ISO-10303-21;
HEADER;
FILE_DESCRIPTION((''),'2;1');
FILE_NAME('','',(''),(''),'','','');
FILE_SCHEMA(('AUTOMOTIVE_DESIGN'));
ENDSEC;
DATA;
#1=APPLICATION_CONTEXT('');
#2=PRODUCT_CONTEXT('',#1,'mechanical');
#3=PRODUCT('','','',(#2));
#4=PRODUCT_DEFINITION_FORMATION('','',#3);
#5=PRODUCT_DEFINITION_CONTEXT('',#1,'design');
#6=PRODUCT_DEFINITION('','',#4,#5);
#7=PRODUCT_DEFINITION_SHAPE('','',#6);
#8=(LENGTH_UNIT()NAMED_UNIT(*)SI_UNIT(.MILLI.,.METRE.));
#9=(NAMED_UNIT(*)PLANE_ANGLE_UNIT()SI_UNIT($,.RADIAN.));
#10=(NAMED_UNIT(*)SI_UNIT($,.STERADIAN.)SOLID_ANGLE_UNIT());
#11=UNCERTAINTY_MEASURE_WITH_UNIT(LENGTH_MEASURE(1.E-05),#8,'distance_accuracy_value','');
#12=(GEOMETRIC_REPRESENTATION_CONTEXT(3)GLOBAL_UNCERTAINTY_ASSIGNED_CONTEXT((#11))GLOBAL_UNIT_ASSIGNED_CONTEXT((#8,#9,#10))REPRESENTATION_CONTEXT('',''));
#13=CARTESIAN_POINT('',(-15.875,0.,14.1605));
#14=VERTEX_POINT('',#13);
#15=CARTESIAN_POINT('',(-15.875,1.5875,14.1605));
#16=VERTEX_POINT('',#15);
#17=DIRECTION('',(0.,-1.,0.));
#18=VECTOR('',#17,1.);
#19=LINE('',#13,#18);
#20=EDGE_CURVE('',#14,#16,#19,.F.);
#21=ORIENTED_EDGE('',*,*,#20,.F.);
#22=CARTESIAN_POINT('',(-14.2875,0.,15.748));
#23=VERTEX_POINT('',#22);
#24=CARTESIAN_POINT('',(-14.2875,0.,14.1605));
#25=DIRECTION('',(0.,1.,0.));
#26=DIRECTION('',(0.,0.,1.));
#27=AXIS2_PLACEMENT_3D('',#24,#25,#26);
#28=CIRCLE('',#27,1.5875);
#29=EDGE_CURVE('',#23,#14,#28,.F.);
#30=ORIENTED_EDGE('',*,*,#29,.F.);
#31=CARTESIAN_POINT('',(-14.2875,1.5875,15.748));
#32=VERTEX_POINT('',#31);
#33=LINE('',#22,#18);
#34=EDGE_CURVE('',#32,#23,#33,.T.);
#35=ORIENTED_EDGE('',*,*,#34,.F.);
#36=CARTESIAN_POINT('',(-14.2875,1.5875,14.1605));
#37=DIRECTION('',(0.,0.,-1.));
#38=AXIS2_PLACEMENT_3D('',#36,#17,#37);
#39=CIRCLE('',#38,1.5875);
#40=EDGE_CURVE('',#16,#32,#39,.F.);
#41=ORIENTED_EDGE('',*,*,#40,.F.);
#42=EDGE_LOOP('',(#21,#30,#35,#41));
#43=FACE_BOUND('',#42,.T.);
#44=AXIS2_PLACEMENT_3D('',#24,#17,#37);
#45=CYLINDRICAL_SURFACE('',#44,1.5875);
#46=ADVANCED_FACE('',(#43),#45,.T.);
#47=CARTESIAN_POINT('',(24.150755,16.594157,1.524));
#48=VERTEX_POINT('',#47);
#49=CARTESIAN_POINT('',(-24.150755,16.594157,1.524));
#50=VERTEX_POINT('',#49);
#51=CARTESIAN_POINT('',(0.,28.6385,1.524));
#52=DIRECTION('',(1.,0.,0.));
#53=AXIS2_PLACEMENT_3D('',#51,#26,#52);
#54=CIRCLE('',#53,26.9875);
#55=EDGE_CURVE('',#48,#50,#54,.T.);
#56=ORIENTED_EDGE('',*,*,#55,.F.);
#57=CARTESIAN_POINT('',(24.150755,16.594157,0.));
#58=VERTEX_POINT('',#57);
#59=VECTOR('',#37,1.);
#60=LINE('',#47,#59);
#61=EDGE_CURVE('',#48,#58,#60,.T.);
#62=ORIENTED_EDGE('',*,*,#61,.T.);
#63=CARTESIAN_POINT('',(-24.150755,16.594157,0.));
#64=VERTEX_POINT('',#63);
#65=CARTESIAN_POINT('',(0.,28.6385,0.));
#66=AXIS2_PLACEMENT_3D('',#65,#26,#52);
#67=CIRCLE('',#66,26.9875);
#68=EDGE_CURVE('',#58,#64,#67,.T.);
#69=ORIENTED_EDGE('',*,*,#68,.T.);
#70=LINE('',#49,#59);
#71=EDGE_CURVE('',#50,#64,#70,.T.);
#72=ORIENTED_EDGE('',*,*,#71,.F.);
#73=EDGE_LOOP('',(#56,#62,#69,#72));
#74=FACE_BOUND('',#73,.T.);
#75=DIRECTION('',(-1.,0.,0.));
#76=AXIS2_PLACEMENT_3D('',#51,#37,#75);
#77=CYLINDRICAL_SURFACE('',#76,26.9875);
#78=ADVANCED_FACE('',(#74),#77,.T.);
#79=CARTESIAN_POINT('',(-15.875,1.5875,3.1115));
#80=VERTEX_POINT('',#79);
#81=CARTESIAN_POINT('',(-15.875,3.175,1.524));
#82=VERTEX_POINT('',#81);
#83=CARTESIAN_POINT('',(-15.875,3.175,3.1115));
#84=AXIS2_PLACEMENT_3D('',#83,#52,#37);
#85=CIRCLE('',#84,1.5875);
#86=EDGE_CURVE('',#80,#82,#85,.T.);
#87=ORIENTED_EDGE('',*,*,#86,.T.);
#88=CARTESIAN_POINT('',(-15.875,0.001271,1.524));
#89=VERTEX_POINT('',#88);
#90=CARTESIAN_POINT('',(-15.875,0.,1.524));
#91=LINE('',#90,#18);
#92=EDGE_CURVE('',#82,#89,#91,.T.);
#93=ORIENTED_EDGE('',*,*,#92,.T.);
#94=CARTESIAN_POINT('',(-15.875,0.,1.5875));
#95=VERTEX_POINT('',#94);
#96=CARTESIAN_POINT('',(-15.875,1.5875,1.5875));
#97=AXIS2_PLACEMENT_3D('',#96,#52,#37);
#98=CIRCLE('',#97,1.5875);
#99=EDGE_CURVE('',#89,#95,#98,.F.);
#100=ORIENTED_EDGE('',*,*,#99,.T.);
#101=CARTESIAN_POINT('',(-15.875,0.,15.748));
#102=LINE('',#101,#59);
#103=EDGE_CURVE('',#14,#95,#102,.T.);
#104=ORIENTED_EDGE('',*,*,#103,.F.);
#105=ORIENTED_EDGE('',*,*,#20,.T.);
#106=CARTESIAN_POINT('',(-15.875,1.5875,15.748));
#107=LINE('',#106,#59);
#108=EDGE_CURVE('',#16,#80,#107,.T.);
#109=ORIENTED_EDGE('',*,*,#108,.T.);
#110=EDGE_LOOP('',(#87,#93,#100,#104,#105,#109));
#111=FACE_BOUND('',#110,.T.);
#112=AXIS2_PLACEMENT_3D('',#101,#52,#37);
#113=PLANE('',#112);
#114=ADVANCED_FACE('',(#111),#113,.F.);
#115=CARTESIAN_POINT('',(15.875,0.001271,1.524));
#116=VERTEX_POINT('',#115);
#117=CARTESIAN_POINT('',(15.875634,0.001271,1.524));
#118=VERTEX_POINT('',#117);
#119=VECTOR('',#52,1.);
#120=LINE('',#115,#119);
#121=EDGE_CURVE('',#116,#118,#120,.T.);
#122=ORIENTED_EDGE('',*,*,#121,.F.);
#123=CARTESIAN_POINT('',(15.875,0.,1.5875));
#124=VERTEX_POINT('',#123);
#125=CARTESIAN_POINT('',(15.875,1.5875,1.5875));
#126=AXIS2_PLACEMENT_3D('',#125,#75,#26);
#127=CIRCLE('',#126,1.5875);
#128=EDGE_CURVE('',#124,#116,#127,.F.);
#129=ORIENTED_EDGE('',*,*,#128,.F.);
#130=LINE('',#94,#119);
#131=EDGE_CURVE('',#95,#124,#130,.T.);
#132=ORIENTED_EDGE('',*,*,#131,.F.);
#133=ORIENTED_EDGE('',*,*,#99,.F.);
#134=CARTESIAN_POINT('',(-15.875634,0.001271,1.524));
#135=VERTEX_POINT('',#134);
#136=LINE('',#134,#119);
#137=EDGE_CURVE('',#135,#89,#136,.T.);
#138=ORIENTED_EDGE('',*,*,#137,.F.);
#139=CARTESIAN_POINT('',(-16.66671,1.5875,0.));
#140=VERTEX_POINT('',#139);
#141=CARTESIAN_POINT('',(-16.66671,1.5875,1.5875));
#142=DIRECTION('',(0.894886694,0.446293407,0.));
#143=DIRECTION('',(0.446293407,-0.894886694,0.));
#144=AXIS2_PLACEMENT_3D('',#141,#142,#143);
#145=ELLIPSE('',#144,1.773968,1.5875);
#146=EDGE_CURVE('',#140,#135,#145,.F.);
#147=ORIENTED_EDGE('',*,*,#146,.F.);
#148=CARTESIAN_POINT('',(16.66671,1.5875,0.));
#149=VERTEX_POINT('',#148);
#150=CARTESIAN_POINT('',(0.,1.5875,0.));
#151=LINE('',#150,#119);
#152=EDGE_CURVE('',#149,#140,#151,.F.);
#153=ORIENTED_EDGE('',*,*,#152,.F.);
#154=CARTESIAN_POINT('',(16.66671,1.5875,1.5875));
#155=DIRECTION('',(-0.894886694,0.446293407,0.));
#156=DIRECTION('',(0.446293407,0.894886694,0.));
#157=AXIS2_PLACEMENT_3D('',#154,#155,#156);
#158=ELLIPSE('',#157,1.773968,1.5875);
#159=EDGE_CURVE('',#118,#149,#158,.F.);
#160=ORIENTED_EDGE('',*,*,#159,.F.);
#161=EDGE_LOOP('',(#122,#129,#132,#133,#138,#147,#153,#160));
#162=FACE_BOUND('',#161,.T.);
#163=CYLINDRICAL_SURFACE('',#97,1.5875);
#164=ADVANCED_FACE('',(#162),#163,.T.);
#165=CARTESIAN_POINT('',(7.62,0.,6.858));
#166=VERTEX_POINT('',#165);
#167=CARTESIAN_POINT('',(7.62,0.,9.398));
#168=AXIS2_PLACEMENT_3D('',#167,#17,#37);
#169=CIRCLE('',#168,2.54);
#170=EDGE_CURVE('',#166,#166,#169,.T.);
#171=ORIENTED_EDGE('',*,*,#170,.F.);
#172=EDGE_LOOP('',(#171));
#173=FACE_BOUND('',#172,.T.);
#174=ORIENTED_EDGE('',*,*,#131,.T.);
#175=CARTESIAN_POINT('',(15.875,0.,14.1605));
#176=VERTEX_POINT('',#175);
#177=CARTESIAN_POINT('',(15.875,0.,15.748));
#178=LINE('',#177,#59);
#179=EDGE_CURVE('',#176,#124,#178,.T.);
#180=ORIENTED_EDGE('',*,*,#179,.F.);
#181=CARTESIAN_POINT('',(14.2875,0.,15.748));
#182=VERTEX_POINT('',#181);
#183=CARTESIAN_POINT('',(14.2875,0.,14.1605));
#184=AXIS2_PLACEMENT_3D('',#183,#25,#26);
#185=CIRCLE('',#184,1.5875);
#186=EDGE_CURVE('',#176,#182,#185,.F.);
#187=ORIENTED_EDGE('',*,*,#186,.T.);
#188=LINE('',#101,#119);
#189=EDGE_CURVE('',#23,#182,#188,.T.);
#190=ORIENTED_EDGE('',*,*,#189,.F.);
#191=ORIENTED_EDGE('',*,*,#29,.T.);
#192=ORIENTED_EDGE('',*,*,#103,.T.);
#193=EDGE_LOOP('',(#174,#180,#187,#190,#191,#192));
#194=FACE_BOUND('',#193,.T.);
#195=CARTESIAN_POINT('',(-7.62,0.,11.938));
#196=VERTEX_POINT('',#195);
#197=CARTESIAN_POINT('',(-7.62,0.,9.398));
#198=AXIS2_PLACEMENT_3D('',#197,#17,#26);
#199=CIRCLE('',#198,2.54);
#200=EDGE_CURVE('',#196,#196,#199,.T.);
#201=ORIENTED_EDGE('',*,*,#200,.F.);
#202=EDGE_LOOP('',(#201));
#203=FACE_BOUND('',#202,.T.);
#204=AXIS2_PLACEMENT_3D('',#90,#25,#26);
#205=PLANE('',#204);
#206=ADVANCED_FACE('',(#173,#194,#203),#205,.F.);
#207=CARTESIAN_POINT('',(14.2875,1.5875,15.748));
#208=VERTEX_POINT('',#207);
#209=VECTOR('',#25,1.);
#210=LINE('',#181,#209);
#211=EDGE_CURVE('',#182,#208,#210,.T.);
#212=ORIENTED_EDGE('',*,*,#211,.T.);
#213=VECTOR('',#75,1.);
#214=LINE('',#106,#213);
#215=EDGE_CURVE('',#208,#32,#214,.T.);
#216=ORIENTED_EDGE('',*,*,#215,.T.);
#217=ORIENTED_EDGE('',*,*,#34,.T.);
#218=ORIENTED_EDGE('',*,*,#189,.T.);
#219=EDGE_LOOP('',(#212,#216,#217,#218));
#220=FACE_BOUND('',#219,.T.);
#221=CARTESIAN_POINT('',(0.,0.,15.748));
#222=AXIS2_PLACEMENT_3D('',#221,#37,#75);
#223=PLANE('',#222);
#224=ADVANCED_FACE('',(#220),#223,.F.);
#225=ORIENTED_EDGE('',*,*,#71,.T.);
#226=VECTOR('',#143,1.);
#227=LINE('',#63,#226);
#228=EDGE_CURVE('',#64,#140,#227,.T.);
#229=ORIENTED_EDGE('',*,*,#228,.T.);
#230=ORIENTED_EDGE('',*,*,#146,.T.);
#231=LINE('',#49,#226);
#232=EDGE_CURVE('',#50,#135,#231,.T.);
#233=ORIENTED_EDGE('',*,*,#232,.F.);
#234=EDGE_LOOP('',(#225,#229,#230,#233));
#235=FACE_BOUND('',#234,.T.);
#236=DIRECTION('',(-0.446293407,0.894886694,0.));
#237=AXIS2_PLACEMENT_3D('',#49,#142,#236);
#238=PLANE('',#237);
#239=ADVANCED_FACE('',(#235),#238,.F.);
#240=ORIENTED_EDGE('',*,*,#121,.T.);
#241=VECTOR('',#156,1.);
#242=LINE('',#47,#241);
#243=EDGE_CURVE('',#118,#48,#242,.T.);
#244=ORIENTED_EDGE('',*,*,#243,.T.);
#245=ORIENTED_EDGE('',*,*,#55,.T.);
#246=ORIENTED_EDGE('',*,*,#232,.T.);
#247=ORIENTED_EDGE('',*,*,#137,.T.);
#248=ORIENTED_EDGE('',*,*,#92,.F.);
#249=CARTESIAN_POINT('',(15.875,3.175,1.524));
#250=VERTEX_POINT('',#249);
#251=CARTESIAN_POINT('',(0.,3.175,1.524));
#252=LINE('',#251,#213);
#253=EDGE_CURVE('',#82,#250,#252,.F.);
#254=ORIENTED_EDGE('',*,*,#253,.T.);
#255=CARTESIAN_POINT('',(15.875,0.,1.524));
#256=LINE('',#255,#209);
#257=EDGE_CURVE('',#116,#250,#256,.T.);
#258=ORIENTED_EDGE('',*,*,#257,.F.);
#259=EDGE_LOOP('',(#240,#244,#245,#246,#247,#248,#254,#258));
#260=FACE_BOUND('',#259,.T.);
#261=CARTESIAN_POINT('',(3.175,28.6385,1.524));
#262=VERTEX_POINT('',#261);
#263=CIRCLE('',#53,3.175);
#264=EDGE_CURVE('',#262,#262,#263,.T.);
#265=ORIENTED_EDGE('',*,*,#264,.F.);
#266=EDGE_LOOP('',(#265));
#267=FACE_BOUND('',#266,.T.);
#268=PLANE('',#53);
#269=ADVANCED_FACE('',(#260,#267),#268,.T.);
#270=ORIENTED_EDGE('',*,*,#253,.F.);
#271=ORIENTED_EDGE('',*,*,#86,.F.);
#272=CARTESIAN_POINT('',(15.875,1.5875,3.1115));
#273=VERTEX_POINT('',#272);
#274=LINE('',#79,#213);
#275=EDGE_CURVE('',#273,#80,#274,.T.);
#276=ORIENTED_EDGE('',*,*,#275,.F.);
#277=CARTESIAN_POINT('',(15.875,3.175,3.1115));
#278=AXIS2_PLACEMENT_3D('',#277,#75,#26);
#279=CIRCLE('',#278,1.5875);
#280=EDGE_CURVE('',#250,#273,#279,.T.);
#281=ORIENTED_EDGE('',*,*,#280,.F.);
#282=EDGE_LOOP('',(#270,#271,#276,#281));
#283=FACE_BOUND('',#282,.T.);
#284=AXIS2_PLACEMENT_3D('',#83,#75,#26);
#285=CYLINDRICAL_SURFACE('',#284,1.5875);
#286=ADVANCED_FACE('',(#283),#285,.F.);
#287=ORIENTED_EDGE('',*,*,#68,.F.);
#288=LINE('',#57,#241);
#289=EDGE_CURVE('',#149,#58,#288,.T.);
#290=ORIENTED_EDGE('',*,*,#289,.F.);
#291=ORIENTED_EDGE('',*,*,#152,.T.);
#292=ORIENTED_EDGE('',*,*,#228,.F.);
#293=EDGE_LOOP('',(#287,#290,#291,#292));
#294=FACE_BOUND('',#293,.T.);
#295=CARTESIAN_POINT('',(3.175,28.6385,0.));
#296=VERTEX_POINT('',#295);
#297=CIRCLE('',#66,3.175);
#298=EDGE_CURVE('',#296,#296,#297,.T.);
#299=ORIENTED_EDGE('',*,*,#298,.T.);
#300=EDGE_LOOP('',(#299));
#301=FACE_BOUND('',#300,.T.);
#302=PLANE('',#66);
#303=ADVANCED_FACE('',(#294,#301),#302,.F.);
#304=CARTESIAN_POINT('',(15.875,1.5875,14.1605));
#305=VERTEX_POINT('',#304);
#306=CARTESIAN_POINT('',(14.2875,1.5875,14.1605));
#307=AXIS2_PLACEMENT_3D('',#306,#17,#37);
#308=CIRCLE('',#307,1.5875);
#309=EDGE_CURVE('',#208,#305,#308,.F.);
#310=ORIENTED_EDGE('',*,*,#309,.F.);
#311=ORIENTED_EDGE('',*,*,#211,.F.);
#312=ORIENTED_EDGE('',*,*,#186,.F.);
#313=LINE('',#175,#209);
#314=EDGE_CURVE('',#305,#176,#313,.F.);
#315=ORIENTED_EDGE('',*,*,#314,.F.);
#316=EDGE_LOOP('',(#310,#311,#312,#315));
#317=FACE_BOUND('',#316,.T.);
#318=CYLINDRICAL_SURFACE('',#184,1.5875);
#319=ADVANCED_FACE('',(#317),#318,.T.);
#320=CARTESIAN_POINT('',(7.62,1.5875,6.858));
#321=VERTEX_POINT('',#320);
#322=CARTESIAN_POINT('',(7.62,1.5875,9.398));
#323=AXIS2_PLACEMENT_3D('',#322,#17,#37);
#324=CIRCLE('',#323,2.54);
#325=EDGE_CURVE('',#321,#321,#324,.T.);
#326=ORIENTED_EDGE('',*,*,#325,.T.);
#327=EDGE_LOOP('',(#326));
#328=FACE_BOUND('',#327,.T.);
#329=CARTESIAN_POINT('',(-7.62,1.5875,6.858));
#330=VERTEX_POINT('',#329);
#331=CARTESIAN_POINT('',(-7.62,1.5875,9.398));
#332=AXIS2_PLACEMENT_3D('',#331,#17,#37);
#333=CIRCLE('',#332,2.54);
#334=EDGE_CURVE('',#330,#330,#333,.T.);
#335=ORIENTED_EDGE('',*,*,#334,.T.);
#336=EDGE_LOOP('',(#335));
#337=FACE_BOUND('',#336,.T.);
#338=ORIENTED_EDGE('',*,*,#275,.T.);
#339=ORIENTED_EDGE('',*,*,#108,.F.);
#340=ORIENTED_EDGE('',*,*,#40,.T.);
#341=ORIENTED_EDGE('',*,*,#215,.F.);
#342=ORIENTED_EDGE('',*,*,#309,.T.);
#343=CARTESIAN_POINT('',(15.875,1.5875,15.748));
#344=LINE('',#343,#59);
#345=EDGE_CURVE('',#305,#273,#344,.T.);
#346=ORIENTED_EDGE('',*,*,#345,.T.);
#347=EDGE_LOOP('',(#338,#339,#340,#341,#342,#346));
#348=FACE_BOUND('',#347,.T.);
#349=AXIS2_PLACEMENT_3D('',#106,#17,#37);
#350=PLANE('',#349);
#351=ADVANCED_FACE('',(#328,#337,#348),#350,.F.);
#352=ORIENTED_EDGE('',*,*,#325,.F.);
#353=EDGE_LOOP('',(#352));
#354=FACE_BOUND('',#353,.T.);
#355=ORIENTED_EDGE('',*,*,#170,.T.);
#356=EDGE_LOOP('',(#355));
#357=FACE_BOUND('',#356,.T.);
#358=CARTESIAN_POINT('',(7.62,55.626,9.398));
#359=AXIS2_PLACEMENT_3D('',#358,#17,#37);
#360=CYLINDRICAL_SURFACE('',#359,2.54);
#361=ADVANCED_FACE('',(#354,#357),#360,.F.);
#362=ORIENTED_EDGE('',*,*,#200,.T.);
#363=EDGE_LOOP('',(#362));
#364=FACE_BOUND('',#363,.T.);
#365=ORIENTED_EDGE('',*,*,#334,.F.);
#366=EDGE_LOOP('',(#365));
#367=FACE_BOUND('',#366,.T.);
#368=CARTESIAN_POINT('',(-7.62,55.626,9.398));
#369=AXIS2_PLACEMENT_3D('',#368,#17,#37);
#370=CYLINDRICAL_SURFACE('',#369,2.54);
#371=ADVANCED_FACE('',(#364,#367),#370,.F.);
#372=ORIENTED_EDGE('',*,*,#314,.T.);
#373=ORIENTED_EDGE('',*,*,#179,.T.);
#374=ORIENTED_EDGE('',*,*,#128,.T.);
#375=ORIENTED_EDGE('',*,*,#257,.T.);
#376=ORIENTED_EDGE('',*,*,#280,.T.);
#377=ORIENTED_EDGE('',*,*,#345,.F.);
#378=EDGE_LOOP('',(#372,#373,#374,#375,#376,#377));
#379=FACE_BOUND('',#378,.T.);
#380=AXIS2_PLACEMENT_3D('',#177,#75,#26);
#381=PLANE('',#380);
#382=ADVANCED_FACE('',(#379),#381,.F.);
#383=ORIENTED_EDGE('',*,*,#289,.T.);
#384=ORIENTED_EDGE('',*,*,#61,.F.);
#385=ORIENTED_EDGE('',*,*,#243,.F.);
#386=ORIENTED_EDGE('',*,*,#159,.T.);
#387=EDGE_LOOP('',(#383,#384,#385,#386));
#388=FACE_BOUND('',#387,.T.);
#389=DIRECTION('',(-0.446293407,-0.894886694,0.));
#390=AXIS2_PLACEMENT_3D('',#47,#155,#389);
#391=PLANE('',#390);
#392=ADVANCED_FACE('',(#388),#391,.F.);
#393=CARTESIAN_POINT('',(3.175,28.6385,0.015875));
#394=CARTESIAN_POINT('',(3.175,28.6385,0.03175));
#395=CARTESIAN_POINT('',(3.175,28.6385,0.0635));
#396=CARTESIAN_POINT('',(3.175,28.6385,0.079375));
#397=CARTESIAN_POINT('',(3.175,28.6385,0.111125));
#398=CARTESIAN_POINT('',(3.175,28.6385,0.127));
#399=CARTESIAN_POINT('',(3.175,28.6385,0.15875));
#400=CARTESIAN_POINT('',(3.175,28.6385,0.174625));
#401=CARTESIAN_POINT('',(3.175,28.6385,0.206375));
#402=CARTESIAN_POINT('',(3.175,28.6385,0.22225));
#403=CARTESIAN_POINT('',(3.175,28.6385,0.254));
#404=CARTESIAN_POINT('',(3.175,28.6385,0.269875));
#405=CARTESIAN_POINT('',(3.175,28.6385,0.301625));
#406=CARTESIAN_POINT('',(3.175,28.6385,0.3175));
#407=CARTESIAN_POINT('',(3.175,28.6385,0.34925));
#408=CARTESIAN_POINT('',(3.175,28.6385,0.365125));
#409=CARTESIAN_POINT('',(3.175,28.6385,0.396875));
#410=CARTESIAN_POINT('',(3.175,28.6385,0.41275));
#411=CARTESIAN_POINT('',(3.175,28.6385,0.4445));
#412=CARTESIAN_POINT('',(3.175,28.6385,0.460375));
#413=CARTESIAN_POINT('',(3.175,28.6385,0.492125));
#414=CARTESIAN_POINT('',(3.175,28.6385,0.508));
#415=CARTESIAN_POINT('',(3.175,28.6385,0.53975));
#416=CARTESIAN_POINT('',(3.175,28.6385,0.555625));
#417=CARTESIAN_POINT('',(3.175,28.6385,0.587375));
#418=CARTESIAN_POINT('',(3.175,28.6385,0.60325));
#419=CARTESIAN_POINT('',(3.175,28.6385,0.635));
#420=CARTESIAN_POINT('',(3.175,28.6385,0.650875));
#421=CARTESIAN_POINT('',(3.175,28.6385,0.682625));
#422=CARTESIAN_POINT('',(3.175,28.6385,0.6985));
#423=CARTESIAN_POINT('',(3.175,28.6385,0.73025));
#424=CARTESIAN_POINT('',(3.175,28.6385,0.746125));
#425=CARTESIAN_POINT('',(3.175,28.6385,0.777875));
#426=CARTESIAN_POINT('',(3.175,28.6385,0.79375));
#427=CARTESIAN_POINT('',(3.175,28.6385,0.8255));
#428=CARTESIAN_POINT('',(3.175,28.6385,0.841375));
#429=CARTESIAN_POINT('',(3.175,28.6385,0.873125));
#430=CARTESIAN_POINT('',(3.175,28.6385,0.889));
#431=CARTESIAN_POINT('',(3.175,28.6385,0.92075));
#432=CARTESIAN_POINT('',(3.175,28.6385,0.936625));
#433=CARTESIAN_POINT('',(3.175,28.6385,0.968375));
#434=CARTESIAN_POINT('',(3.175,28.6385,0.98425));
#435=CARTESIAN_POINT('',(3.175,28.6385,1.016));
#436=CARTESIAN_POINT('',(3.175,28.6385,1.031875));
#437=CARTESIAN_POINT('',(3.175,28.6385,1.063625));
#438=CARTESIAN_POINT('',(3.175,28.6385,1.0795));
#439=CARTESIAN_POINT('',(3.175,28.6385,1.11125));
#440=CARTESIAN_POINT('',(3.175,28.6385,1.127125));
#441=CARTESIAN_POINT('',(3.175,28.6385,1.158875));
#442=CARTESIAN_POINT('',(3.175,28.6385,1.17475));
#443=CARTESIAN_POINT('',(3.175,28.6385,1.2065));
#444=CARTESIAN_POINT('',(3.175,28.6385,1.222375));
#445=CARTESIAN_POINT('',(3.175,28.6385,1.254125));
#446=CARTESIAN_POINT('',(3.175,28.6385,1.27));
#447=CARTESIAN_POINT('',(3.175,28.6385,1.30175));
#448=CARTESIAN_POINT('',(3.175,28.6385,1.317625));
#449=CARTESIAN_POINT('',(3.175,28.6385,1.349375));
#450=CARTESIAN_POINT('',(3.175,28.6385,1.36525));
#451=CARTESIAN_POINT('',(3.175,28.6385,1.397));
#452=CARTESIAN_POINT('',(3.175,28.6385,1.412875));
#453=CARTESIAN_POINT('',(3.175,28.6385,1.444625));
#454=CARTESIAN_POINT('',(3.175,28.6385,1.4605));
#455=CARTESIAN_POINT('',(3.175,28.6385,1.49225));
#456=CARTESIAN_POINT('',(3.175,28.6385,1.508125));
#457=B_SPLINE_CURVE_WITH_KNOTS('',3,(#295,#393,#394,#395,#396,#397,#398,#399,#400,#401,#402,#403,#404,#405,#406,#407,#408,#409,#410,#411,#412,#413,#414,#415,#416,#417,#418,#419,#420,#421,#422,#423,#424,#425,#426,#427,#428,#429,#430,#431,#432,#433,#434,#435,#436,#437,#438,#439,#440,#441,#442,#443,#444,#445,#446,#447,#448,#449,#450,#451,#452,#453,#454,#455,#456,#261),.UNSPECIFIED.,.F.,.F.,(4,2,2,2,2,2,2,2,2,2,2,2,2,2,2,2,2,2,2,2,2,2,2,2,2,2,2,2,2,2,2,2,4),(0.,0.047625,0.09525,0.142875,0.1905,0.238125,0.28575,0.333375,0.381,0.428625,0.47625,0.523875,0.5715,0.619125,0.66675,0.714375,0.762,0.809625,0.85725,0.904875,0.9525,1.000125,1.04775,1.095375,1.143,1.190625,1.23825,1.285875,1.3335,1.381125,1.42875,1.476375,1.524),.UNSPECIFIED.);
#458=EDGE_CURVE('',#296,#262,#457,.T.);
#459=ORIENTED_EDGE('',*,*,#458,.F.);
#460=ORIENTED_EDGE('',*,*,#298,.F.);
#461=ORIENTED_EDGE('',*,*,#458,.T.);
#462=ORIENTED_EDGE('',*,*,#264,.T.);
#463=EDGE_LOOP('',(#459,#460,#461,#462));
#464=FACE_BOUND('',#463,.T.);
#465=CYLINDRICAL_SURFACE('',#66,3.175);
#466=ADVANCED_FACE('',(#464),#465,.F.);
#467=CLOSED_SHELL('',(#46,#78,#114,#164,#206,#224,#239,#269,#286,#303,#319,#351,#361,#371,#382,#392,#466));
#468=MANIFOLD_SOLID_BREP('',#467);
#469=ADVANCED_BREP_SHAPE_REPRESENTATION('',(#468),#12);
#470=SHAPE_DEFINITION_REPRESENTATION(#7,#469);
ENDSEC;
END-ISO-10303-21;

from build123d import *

# Parameters (mm, degrees)
BOSS_EXTRUDE1_DEPTH = 1.524
SKETCH2_R           = 3.175
CUT_EXTRUDE1_DEPTH  = 62.84577276
SKETCH3_W           = 31.75
SKETCH3_H           = 1.5875
BOSS_EXTRUDE2_DEPTH = 14.224
FILLET1_R           = 1.5875
SKETCH4_R           = 2.54
CUT_EXTRUDE2_DEPTH  = 64.801070024


with BuildPart() as part:
    # Sketch1 → Boss-Extrude1 (new body)
    with BuildSketch(Plane.XY):
        with BuildLine():
            Line((-24.150754652, 16.594156681), (-15.875, 0))
            Line((-15.875, 0), (15.875, 0))
            Line((15.875, 0), (24.150754652, 16.594156681))
            ThreePointArc((24.150754652, 16.594156681), (0, 55.626), (-24.150754652, 16.594156681))
        make_face()
    extrude(amount=BOSS_EXTRUDE1_DEPTH)

    # Sketch2 → Cut-Extrude1 (cut, through all)
    with BuildSketch(Plane.XY.offset(1.524)):
        with Locations((0, 28.6385)):
            Circle(SKETCH2_R)
    extrude(amount=-CUT_EXTRUDE1_DEPTH, mode=Mode.SUBTRACT)

    # Sketch3 → Boss-Extrude2 (add)
    with BuildSketch(Plane.XY.offset(1.524)):
        with Locations((0, 0.79375)):
            Rectangle(SKETCH3_W, SKETCH3_H)
    extrude(amount=BOSS_EXTRUDE2_DEPTH)

    # Fillet1
    # the kernel refuses this fillet: 1.5875 mm, written as the material it adds along each edge
    with BuildSketch(Plane(origin=(15.875, 1.5875, 1.524), x_dir=(0, 1, 0), z_dir=(-1, 0, 0))) as fillet1_piece_1:
        with BuildLine():
            CenterArc((FILLET1_R, -FILLET1_R), FILLET1_R, 90, 90)
            Line((0, -FILLET1_R), (0, 0))
            Line((0, 0), (FILLET1_R, 0))
        make_face()
    extrude(amount=31.75)
    # the kernel refuses this fillet: 1.5875 mm, written as the material it takes off along each edge
    with BuildSketch(Plane(origin=(-15.875, 5.55625, 15.748), x_dir=(1, 0, 0), z_dir=(0, -1, 0))) as fillet1_2_piece_1:
        with BuildLine():
            CenterArc((FILLET1_R, -FILLET1_R), FILLET1_R, 90, 90)
            Line((0, -FILLET1_R), (0, 0))
            Line((0, 0), (FILLET1_R, 0))
        make_face()
    extrude(amount=9.525, mode=Mode.SUBTRACT)
    with BuildSketch(Plane(origin=(15.875, -3.96875, 15.748), x_dir=(0, 0, -1), z_dir=(0, 1, 0))) as fillet1_2_piece_2:
        with BuildLine():
            CenterArc((FILLET1_R, FILLET1_R), FILLET1_R, 180, 90)
            Line((0, FILLET1_R), (0, 0))
            Line((0, 0), (FILLET1_R, 0))
        make_face()
    extrude(amount=9.525, mode=Mode.SUBTRACT)
    with BuildSketch(Plane(origin=(-19.84375, 0, 0), x_dir=(0, 1, 0), z_dir=(1, 0, 0))) as fillet1_2_piece_3:
        with BuildLine():
            CenterArc((FILLET1_R, FILLET1_R), FILLET1_R, 180, 90)
            Line((0, FILLET1_R), (0, 0))
            Line((0, 0), (FILLET1_R, 0))
        make_face()
    extrude(amount=39.6875, mode=Mode.SUBTRACT)

    # Sketch4 → Cut-Extrude2 (cut, through all)
    with BuildSketch(Plane.XZ):
        with Locations(Location((7.62, 9.398, 0), (0, 0, 270))):
            Circle(SKETCH4_R)
        with Locations(Location((-7.62, 9.398, 0), (0, 0, 270))):
            Circle(SKETCH4_R)
    extrude(amount=-CUT_EXTRUDE2_DEPTH, mode=Mode.SUBTRACT)


solid = part.part
